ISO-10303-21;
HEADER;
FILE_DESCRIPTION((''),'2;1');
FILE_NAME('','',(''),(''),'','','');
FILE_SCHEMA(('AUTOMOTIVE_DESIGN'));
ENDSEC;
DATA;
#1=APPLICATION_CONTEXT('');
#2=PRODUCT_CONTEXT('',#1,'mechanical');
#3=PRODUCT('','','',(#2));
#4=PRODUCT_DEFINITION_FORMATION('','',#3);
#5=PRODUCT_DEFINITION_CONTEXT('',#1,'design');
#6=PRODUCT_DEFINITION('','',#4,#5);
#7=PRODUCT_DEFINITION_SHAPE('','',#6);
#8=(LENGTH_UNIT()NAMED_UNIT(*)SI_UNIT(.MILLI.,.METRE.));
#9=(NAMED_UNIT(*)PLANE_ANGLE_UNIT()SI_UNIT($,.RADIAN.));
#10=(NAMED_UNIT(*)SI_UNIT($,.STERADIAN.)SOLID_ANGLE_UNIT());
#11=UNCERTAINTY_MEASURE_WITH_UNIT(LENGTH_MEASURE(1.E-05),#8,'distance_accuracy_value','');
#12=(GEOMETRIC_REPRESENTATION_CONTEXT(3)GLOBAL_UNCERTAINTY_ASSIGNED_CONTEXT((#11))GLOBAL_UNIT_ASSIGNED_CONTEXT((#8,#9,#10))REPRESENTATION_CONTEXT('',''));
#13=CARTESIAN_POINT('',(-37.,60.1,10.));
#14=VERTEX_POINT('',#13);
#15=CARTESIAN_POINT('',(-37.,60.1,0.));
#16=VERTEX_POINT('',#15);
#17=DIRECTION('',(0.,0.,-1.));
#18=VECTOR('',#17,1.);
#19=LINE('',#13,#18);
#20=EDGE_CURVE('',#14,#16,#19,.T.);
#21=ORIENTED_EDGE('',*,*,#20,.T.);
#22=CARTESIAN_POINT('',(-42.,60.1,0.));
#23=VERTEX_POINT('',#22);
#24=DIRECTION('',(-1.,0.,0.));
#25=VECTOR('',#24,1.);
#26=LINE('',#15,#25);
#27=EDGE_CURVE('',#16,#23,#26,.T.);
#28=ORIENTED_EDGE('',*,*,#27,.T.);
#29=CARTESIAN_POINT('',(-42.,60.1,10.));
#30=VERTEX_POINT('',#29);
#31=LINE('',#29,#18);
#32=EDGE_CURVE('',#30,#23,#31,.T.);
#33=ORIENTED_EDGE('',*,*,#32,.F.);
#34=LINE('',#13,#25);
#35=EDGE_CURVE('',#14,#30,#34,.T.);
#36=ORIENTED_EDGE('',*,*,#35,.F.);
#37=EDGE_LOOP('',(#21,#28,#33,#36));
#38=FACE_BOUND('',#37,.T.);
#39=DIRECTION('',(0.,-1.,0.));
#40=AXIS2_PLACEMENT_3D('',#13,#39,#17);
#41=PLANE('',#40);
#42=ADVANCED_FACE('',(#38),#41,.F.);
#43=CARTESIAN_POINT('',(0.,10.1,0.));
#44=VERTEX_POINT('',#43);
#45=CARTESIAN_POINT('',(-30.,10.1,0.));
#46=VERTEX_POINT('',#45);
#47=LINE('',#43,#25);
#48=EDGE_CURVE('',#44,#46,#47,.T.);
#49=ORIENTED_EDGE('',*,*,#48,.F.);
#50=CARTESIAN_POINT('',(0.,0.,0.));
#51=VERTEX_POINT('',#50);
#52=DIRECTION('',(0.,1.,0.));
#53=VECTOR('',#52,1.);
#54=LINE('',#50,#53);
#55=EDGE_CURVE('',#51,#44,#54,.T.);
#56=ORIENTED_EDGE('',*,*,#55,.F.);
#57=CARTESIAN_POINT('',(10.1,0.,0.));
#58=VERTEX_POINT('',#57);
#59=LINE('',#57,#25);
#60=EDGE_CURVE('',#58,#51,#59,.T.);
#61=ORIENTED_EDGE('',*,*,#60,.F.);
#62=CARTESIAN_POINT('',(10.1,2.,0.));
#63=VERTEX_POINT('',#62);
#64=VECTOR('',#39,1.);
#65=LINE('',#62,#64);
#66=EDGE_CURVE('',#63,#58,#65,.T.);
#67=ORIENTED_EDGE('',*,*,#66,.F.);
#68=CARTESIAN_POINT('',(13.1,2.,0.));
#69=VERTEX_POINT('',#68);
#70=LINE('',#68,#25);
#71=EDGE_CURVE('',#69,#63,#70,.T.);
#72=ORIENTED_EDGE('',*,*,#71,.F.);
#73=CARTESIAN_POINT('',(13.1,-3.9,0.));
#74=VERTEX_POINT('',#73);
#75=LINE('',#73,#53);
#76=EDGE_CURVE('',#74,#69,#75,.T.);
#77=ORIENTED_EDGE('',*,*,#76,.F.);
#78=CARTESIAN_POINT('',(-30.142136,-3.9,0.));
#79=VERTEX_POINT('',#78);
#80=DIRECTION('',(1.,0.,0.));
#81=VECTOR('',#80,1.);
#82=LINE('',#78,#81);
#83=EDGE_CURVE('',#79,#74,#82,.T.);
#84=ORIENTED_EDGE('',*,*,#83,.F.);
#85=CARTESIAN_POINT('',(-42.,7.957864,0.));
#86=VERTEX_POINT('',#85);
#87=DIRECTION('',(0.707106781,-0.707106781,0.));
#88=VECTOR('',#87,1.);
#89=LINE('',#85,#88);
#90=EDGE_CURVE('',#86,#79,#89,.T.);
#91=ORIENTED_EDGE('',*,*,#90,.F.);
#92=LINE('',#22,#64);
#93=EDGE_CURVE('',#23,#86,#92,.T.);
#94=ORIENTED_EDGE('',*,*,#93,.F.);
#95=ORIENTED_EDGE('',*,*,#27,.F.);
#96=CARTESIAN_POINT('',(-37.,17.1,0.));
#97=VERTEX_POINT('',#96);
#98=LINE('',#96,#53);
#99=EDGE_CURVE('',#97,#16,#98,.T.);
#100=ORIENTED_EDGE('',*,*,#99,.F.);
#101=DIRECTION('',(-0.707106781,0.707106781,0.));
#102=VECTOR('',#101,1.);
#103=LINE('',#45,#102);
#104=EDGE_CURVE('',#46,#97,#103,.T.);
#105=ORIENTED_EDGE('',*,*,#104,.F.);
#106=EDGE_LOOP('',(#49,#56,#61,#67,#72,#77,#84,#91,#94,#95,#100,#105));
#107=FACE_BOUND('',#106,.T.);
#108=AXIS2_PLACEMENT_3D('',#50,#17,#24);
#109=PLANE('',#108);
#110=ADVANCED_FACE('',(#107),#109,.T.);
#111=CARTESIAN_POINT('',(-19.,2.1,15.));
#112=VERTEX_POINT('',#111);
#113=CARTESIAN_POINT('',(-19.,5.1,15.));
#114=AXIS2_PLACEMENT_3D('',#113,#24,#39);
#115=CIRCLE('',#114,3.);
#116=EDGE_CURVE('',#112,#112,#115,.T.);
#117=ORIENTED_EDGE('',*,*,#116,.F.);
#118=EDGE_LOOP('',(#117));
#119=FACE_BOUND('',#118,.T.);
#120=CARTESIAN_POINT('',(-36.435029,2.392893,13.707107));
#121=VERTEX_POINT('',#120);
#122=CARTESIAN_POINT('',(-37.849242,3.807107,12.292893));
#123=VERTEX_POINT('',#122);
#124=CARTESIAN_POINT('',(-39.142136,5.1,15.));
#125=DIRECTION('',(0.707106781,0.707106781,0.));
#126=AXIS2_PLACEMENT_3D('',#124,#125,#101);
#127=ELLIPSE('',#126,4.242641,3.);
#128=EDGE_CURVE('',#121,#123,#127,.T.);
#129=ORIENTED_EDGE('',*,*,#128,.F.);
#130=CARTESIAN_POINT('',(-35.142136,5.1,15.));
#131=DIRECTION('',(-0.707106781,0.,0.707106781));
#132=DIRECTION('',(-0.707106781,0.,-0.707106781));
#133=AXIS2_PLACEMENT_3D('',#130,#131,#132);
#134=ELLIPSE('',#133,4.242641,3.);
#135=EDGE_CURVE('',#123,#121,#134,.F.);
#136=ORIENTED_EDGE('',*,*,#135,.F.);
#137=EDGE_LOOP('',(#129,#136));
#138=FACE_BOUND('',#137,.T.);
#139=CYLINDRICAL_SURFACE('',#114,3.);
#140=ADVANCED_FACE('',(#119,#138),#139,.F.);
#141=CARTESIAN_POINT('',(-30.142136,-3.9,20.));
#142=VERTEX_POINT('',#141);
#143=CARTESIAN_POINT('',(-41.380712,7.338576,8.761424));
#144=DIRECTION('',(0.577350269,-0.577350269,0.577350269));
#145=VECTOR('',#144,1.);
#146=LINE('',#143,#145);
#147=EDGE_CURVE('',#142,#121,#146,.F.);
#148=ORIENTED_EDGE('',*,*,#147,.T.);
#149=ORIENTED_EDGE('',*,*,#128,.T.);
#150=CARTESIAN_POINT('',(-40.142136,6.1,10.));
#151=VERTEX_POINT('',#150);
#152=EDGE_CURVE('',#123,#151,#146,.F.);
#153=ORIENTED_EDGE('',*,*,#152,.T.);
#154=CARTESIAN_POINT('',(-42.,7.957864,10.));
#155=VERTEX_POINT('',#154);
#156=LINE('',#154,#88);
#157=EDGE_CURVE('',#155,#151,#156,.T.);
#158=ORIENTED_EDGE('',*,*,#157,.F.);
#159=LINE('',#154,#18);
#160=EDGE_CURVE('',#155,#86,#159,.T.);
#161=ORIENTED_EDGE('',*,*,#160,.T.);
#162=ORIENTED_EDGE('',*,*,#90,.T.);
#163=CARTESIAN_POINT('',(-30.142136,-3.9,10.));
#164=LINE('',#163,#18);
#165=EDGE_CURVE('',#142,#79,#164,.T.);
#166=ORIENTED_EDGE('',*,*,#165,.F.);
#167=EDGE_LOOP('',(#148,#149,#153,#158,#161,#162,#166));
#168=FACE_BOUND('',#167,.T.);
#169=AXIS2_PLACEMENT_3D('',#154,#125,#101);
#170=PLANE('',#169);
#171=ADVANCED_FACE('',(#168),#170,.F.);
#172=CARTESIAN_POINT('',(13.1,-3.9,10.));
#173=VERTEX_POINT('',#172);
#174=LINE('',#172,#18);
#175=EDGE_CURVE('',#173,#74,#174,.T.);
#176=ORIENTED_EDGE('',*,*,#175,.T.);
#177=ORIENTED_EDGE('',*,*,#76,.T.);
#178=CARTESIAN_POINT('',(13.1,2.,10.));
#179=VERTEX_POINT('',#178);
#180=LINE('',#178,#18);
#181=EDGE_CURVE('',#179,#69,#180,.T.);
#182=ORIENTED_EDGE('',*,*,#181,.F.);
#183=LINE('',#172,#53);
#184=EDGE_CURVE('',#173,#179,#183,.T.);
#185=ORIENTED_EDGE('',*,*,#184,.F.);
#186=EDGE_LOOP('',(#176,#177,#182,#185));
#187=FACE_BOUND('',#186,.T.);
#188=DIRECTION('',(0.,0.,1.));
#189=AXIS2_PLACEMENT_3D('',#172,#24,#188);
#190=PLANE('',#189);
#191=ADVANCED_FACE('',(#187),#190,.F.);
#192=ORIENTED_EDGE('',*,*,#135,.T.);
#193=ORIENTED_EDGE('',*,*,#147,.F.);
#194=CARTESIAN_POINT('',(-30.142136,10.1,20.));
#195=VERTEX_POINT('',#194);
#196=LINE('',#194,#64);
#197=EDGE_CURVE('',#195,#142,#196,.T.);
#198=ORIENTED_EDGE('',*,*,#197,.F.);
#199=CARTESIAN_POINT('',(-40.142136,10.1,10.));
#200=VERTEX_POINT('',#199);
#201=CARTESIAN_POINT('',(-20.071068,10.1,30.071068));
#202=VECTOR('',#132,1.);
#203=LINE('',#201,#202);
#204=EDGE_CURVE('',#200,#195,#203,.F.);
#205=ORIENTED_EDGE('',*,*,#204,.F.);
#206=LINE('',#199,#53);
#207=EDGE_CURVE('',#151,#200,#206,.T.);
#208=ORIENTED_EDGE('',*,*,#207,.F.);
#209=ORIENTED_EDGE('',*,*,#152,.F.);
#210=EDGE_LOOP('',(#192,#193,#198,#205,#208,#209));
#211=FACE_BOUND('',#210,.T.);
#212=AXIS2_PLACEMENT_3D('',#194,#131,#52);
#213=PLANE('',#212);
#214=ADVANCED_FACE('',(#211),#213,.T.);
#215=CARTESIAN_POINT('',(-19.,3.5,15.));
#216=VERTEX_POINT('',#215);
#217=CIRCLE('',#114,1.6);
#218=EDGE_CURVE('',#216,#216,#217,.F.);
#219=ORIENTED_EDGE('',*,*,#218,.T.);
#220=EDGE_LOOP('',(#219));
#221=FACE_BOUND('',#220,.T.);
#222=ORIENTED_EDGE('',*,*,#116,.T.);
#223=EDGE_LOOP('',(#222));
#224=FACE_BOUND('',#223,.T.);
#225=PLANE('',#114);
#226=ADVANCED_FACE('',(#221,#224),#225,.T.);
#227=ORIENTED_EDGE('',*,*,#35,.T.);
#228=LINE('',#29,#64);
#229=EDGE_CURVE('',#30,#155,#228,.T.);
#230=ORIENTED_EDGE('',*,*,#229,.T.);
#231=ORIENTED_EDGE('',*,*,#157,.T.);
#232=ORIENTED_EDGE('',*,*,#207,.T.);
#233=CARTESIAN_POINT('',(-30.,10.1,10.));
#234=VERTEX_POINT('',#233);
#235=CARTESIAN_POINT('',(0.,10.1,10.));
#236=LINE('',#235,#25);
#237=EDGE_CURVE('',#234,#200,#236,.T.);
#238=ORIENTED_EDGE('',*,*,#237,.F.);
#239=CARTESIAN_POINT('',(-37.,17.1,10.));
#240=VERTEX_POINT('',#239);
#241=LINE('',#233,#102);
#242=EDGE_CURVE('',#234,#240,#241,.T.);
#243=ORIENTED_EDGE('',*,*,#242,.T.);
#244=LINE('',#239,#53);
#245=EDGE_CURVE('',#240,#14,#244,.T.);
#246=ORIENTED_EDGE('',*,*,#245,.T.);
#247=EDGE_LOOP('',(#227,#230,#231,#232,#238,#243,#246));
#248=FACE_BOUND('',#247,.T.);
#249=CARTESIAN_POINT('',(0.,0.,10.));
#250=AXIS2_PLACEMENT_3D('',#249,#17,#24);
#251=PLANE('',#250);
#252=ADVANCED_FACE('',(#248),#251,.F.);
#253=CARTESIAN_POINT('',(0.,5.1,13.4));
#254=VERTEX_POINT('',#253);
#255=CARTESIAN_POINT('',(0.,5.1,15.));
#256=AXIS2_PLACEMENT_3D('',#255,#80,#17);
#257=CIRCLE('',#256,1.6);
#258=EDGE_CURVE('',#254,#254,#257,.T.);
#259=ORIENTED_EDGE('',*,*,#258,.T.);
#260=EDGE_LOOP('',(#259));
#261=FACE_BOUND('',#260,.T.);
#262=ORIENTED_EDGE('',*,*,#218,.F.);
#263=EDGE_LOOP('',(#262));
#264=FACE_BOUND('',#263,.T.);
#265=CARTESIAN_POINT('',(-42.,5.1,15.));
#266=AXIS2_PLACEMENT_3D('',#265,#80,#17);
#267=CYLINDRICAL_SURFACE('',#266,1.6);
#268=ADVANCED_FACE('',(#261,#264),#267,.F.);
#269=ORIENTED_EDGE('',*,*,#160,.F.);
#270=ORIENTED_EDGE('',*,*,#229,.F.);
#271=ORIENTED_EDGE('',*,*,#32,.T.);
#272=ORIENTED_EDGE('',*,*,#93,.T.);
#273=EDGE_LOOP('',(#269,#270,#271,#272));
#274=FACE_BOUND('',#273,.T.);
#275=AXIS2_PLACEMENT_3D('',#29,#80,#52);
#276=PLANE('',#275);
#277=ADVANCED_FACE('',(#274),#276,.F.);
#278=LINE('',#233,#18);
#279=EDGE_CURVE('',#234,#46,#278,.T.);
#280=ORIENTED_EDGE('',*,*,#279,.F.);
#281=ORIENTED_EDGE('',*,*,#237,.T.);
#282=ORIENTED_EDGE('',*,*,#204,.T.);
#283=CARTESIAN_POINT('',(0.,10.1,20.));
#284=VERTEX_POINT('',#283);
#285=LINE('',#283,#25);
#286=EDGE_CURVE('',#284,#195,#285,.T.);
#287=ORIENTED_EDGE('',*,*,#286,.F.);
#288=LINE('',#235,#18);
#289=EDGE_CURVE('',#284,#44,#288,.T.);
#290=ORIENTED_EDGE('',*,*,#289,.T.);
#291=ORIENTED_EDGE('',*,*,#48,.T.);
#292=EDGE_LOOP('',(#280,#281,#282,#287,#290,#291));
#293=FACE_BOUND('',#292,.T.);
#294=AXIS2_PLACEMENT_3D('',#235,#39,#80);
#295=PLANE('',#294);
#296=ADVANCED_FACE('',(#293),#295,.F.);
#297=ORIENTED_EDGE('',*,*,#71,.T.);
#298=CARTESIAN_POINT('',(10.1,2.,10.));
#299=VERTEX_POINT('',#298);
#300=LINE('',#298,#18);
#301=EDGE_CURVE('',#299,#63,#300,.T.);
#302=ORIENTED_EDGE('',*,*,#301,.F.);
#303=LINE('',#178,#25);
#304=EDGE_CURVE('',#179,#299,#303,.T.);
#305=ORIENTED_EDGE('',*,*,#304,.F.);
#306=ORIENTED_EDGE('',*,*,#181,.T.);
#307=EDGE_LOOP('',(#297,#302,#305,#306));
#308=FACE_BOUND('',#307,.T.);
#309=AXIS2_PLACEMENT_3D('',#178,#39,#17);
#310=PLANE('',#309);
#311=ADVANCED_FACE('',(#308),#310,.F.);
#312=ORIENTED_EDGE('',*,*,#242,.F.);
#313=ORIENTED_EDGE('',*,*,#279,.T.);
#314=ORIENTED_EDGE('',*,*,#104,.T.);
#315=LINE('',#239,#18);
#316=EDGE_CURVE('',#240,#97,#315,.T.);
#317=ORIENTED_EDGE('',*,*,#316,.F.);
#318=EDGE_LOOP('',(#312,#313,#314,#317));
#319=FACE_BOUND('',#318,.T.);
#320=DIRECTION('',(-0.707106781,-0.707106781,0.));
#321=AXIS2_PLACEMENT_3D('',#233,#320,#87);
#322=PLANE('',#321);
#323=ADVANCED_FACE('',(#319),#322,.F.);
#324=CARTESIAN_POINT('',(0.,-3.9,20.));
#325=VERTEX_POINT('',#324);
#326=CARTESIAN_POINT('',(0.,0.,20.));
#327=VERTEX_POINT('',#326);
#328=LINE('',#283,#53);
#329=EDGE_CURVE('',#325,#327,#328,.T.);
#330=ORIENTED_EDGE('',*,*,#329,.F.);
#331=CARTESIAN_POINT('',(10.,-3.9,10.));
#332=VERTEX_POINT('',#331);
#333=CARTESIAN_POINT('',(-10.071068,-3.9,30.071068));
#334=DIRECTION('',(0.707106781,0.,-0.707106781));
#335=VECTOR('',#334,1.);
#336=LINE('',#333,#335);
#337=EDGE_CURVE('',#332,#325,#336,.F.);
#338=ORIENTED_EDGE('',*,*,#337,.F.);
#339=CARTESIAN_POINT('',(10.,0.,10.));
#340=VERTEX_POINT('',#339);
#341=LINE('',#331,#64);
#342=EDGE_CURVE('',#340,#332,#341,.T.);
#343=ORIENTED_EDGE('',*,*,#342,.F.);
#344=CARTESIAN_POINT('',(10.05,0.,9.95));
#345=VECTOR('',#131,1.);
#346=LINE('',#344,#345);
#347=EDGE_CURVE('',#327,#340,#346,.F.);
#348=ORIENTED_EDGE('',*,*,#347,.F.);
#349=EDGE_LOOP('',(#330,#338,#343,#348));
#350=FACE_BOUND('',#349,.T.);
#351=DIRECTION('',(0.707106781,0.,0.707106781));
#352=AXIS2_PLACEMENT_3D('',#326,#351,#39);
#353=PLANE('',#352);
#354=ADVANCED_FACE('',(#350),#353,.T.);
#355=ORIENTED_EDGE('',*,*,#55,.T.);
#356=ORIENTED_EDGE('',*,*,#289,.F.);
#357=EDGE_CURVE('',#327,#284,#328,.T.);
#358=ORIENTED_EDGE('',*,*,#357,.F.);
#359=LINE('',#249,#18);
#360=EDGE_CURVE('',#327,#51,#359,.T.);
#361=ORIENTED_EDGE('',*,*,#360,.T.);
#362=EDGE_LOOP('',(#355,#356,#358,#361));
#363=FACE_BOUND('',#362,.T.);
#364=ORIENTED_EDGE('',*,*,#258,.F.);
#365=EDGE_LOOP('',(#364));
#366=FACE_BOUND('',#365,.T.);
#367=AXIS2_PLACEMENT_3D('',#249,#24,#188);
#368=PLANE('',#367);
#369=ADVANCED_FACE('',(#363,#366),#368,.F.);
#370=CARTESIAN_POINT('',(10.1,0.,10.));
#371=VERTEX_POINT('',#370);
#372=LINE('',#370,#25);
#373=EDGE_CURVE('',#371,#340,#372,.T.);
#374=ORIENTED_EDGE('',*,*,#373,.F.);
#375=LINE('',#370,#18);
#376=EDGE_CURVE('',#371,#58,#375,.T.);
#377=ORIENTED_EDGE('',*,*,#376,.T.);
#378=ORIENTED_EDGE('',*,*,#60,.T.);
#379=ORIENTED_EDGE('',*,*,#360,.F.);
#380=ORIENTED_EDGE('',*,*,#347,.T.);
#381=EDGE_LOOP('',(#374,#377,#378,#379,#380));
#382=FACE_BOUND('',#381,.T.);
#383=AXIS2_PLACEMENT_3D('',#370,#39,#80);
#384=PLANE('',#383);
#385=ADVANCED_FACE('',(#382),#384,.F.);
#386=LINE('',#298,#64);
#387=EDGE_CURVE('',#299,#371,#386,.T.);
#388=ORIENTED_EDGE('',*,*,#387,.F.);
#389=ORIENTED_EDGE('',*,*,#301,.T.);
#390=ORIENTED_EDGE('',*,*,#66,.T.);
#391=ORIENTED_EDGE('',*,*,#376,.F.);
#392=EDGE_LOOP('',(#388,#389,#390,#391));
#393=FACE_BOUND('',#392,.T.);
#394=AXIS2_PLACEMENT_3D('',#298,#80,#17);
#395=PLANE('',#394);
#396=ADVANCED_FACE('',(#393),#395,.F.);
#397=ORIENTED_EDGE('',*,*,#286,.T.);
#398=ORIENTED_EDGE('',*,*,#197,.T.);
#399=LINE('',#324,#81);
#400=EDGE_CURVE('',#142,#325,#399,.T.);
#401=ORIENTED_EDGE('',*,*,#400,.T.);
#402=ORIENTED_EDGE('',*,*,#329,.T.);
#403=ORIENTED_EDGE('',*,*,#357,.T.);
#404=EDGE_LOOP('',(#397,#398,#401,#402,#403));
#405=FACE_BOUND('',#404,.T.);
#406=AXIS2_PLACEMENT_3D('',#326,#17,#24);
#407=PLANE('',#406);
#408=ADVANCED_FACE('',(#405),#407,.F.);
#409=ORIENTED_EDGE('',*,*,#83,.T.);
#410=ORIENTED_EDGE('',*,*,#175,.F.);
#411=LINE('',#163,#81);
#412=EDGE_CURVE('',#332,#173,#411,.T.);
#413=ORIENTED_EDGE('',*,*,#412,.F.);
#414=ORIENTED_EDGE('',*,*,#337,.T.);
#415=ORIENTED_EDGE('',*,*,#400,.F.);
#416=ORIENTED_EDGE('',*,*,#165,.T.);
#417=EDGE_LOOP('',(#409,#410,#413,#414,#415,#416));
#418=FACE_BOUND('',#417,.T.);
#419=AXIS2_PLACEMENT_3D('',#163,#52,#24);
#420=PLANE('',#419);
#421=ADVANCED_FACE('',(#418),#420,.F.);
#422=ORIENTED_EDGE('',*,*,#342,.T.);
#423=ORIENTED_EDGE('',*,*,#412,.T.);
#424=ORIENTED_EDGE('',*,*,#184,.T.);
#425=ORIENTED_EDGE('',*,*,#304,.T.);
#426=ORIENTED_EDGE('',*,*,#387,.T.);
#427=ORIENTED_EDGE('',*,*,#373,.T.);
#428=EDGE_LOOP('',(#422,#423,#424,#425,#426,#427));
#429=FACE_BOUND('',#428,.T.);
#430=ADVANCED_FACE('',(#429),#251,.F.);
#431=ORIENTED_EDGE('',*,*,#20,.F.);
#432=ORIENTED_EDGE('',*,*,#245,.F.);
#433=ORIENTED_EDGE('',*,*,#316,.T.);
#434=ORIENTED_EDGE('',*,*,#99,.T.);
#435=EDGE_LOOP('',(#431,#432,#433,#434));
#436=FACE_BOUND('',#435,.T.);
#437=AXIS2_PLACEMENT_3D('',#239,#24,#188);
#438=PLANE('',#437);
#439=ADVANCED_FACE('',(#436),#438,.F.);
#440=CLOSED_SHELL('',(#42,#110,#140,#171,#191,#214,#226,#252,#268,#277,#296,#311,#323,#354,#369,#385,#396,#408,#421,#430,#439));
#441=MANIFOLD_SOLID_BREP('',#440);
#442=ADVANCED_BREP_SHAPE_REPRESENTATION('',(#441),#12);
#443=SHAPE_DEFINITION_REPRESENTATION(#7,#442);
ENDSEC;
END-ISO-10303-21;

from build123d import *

# Parameters (mm, degrees)
EXTRUDE_1_DEPTH     = 10
SKETCH_2_W          = 30.142135624
SKETCH_2_H          = 14
EXTRUDE_2_DEPTH     = 10
CHAMFER_2_SIZE      = 10
SKETCH_3_R          = 1.6
CUT_EXTRUDE_1_DEPTH = 77.000065789
SKETCH_4_R          = 3
CUT_EXTRUDE_2_DEPTH = 23


with BuildPart() as part:
    # ｽｹｯﾁ1 → ﾎﾞｽ - 押し出し1 (new body)
    with BuildSketch(Plane.XY):
        Polygon((0, 0), (0, 10.1), (-30, 10.1), (-37, 17.1), (-37, 60.1), (-42, 60.1), (-42, 7.957864376), (-30.142135624, -3.9), (13.1, -3.9), (13.1, 2), (10.1, 2), (10.1, 0), align=None)
    extrude(amount=EXTRUDE_1_DEPTH)

    # ｽｹｯﾁ2 → ﾎﾞｽ - 押し出し2 (add)
    with BuildSketch(Plane.XY.offset(10)):
        with Locations((-15.071067812, 3.1)):
            Rectangle(SKETCH_2_W, SKETCH_2_H)
    extrude(amount=EXTRUDE_2_DEPTH)

    # 面取り2
    chamfer_2_edges = [part.edges().sort_by_distance(p)[0] for p in [
        (-30.142135624, 3.1, 10),
        (0, -1.95, 10),
    ]]
    chamfer(chamfer_2_edges, length=CHAMFER_2_SIZE - 0.0001)  # a hair under: the kernel refuses the full size

    # ｽｹｯﾁ3 → ｶｯﾄ - 押し出し1 (cut, through all)
    with BuildSketch(Plane(origin=(0, 0, 0), x_dir=(0, 0, -1), z_dir=(1, 0, 0))):
        with Locations((-15, 5.1)):
            Circle(SKETCH_3_R)
    extrude(amount=-CUT_EXTRUDE_1_DEPTH, mode=Mode.SUBTRACT)

    # ｽｹｯﾁ4 → ｶｯﾄ - 押し出し2 (cut)
    with BuildSketch(Plane.ZY.offset(42)):
        with Locations(Location((15, 5.1, 0), (0, 0, 270))):
            Circle(SKETCH_4_R)
    extrude(amount=-CUT_EXTRUDE_2_DEPTH, mode=Mode.SUBTRACT)


solid = part.part
